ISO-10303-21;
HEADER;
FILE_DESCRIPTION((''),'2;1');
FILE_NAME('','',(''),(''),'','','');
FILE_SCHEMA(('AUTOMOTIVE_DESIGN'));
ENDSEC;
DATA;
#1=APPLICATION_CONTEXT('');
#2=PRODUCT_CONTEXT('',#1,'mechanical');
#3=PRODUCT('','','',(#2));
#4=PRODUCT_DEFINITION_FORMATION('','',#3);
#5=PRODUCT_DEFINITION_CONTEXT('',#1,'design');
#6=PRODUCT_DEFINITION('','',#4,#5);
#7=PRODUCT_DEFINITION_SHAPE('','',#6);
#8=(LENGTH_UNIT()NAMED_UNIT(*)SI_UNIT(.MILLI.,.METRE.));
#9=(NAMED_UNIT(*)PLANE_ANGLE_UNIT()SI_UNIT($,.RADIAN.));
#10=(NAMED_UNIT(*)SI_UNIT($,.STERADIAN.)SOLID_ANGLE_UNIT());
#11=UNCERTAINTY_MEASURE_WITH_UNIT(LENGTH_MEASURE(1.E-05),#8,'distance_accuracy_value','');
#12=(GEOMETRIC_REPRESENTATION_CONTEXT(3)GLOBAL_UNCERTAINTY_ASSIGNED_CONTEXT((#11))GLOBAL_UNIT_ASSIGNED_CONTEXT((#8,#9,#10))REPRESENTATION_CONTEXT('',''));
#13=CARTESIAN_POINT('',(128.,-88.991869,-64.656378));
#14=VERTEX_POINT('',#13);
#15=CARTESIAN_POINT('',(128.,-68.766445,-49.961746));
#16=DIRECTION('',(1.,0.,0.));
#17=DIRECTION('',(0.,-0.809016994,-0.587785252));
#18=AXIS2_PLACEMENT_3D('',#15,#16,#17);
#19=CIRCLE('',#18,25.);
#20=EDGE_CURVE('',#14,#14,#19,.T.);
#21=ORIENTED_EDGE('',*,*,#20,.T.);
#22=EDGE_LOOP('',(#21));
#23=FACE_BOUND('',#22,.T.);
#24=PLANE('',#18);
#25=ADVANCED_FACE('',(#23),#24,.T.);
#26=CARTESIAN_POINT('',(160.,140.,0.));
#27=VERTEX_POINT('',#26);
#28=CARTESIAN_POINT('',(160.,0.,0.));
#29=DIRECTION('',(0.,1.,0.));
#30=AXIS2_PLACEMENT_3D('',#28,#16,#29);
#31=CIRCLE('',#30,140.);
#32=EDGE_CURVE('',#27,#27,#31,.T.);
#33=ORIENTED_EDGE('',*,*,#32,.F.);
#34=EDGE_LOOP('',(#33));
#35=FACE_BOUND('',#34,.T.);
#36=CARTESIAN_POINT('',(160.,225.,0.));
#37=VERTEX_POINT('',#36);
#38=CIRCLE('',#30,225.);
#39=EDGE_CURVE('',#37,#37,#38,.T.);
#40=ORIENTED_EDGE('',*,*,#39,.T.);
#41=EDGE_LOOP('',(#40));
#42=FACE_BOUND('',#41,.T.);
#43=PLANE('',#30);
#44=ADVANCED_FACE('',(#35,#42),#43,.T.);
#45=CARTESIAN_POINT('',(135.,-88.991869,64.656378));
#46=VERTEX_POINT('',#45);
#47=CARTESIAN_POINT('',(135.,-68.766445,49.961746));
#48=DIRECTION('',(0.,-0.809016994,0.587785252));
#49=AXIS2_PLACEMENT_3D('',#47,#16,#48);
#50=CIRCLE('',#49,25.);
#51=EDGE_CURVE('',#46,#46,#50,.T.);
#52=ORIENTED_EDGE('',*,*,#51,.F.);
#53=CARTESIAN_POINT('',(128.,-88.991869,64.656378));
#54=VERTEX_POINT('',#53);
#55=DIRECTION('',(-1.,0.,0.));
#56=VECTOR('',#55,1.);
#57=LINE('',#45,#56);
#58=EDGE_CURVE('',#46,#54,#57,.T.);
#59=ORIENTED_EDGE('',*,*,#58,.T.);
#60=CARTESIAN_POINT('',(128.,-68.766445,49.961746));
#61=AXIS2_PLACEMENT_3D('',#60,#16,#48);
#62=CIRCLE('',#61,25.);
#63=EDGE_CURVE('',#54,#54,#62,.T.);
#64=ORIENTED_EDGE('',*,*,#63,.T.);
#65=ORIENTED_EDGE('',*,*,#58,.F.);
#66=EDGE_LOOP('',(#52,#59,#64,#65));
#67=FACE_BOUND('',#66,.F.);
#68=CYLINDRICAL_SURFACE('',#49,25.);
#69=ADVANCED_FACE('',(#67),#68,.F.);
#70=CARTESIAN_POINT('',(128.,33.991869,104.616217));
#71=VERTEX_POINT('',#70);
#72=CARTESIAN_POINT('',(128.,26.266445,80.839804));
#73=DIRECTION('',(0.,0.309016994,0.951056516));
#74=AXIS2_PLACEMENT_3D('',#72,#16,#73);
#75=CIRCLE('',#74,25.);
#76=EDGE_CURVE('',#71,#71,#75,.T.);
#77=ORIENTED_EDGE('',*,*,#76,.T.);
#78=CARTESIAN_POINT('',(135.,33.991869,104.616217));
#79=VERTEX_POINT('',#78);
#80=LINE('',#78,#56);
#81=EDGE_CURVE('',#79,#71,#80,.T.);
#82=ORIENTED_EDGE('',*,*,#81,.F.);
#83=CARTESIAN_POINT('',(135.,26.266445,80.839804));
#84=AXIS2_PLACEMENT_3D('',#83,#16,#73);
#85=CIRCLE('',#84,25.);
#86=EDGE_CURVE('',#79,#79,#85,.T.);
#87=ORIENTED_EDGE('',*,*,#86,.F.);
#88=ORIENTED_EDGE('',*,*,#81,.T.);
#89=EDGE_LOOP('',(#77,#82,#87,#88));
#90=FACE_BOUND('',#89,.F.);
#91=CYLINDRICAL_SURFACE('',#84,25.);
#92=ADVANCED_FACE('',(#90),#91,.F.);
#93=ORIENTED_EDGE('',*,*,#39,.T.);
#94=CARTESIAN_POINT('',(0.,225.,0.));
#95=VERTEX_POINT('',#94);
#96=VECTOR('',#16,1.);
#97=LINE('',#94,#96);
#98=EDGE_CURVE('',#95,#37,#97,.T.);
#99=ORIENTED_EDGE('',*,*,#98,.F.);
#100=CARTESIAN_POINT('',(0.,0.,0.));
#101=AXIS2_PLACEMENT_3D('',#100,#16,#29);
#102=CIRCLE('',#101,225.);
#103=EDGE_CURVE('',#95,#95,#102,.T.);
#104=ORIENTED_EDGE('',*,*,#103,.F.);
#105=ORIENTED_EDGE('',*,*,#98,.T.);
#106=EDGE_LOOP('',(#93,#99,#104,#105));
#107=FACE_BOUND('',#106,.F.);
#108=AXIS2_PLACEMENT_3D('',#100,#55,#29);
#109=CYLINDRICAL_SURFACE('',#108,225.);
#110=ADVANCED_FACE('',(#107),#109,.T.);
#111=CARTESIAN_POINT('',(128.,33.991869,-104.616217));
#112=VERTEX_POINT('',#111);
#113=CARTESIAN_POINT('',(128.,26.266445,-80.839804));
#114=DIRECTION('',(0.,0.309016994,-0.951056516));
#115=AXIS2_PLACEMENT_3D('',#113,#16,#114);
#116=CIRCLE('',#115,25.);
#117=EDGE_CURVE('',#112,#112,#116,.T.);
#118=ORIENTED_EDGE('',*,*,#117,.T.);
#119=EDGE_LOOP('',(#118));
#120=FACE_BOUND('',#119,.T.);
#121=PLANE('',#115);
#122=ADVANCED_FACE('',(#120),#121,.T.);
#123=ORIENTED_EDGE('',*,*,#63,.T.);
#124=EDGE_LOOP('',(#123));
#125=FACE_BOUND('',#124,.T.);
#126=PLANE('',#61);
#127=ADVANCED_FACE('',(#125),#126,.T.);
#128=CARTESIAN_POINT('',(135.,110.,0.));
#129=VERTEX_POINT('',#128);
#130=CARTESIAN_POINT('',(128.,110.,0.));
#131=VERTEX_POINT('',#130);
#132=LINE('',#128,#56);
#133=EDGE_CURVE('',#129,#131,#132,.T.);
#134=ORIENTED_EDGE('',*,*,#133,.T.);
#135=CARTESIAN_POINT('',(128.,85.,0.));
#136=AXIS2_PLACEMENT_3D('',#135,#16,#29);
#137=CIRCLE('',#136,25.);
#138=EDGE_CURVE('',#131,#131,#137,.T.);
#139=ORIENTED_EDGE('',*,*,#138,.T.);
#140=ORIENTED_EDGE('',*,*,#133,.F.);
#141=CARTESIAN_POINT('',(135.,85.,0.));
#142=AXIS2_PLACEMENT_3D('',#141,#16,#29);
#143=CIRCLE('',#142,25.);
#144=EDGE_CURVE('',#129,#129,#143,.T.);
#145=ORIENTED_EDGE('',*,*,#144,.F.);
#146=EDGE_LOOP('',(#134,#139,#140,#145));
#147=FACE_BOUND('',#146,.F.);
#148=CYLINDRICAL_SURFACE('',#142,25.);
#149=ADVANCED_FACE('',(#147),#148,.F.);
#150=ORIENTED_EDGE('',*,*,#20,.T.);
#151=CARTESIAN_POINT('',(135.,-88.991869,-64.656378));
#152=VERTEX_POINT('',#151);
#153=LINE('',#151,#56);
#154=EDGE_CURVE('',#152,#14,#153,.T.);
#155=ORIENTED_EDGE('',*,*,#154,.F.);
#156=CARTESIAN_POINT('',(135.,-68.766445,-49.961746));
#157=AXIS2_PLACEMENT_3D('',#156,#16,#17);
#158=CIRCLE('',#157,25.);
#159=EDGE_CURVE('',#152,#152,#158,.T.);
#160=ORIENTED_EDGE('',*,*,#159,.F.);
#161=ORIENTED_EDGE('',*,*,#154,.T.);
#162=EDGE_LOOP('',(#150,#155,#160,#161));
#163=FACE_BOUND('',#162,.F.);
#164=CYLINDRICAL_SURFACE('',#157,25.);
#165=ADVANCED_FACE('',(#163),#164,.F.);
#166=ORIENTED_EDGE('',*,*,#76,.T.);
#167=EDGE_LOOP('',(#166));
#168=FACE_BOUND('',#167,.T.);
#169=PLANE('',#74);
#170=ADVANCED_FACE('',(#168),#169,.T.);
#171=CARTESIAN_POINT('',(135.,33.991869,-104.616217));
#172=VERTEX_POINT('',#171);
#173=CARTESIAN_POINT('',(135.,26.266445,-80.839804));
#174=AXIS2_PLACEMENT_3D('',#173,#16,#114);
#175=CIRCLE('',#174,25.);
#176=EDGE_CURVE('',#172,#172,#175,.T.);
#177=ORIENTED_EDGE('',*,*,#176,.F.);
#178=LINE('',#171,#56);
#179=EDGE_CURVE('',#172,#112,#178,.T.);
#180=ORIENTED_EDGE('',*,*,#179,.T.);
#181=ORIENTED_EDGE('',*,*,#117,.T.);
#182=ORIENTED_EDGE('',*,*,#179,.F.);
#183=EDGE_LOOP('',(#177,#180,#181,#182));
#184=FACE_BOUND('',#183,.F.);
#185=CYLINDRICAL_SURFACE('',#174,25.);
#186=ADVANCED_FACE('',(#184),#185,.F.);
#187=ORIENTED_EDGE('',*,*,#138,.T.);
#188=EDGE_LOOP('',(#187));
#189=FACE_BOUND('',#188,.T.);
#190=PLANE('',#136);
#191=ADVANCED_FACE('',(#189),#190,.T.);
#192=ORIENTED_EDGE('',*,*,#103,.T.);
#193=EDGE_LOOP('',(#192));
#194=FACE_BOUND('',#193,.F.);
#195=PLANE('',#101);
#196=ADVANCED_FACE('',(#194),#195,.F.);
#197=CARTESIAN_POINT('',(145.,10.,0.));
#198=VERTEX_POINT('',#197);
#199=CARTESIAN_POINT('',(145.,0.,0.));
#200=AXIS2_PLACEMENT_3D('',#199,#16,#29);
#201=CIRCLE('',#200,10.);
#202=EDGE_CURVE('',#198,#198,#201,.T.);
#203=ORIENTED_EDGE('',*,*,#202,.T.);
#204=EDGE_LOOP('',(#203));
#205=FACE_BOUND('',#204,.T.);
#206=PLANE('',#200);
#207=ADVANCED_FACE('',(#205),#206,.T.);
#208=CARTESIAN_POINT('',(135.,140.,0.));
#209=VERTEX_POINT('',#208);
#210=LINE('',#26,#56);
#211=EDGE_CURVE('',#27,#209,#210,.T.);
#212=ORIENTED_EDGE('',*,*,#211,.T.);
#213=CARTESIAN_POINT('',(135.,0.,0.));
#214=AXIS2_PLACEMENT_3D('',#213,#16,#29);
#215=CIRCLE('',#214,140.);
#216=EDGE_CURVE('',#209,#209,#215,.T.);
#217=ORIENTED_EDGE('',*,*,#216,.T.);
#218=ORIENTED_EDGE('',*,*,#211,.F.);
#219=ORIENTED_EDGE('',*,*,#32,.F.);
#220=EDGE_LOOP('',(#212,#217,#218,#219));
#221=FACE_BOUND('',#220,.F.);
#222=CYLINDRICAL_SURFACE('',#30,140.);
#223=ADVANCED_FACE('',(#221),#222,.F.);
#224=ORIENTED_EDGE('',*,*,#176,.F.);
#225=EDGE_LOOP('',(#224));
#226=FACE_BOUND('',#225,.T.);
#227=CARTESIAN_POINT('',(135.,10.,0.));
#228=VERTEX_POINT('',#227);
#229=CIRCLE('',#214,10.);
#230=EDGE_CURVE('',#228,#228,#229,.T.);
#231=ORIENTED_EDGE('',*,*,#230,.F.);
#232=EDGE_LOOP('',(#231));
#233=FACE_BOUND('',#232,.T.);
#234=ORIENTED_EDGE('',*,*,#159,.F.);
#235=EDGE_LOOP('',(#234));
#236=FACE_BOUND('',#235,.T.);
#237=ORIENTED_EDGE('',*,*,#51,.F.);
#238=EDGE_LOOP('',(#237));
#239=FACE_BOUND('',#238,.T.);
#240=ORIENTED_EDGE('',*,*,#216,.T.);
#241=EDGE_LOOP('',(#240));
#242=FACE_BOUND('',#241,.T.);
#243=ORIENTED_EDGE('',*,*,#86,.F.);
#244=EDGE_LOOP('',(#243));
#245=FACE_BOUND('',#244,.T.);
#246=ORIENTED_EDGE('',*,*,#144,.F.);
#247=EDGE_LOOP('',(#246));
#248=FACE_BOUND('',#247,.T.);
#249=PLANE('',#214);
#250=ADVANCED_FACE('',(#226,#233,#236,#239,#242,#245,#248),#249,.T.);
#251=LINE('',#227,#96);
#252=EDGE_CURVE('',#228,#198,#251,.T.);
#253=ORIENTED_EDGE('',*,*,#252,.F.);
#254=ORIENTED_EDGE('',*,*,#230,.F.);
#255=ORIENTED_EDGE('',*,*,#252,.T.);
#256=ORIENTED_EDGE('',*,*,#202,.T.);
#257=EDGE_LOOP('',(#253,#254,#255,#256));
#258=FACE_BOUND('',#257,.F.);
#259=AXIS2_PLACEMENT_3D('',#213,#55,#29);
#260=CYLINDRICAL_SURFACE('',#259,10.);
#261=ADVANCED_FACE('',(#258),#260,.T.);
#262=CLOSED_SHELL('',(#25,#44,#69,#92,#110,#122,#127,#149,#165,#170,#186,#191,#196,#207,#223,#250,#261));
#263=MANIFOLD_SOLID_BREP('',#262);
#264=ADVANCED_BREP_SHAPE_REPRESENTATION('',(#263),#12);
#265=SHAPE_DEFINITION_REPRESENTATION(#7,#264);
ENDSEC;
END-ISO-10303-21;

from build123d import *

# Parameters (mm, degrees)
F3_R            = 225
F4_DEPTH        = 160
F5_R            = 140
F6_DEPTH        = 25
F7_R            = 25
F8_DEPTH        = 7
F8_COPIES_COUNT = 5
F9_R            = 10
F10_DEPTH       = 10


# Not quite as in the source:
# - a pattern or mirror of a feature is missing from the dataset's text; its kind, count and spacing are read off the source's solid


with BuildPart() as f4:
    # F3 (on Right) → F4 (new body)
    with BuildSketch(Plane.YZ):
        Circle(F3_R)
    extrude(amount=F4_DEPTH)

    # F5 (on face) → F6 (cut)
    with BuildSketch(Plane.YZ.offset(160)):
        Circle(F5_R)
    extrude(amount=-F6_DEPTH, mode=Mode.SUBTRACT)

    # F7 (on face) → F8 (cut)
    with BuildSketch(Plane.YZ.offset(135)):
        with Locations((85, 0)):
            Circle(F7_R)
    f8 = extrude(amount=-F8_DEPTH, mode=Mode.SUBTRACT)

    # F8_copies: F8 ×5 about axis
    f8_copies_axis = Axis((0, 0, 0), (1, 0, 0))
    for i in range(1, F8_COPIES_COUNT):
        add(f8.rotate(f8_copies_axis, i * 360 / F8_COPIES_COUNT), mode=Mode.SUBTRACT)

    # F9 (on face) → F10 (join)
    with BuildSketch(Plane.YZ.offset(135)):
        Circle(F9_R)
    extrude(amount=F10_DEPTH)


solid = f4.part
